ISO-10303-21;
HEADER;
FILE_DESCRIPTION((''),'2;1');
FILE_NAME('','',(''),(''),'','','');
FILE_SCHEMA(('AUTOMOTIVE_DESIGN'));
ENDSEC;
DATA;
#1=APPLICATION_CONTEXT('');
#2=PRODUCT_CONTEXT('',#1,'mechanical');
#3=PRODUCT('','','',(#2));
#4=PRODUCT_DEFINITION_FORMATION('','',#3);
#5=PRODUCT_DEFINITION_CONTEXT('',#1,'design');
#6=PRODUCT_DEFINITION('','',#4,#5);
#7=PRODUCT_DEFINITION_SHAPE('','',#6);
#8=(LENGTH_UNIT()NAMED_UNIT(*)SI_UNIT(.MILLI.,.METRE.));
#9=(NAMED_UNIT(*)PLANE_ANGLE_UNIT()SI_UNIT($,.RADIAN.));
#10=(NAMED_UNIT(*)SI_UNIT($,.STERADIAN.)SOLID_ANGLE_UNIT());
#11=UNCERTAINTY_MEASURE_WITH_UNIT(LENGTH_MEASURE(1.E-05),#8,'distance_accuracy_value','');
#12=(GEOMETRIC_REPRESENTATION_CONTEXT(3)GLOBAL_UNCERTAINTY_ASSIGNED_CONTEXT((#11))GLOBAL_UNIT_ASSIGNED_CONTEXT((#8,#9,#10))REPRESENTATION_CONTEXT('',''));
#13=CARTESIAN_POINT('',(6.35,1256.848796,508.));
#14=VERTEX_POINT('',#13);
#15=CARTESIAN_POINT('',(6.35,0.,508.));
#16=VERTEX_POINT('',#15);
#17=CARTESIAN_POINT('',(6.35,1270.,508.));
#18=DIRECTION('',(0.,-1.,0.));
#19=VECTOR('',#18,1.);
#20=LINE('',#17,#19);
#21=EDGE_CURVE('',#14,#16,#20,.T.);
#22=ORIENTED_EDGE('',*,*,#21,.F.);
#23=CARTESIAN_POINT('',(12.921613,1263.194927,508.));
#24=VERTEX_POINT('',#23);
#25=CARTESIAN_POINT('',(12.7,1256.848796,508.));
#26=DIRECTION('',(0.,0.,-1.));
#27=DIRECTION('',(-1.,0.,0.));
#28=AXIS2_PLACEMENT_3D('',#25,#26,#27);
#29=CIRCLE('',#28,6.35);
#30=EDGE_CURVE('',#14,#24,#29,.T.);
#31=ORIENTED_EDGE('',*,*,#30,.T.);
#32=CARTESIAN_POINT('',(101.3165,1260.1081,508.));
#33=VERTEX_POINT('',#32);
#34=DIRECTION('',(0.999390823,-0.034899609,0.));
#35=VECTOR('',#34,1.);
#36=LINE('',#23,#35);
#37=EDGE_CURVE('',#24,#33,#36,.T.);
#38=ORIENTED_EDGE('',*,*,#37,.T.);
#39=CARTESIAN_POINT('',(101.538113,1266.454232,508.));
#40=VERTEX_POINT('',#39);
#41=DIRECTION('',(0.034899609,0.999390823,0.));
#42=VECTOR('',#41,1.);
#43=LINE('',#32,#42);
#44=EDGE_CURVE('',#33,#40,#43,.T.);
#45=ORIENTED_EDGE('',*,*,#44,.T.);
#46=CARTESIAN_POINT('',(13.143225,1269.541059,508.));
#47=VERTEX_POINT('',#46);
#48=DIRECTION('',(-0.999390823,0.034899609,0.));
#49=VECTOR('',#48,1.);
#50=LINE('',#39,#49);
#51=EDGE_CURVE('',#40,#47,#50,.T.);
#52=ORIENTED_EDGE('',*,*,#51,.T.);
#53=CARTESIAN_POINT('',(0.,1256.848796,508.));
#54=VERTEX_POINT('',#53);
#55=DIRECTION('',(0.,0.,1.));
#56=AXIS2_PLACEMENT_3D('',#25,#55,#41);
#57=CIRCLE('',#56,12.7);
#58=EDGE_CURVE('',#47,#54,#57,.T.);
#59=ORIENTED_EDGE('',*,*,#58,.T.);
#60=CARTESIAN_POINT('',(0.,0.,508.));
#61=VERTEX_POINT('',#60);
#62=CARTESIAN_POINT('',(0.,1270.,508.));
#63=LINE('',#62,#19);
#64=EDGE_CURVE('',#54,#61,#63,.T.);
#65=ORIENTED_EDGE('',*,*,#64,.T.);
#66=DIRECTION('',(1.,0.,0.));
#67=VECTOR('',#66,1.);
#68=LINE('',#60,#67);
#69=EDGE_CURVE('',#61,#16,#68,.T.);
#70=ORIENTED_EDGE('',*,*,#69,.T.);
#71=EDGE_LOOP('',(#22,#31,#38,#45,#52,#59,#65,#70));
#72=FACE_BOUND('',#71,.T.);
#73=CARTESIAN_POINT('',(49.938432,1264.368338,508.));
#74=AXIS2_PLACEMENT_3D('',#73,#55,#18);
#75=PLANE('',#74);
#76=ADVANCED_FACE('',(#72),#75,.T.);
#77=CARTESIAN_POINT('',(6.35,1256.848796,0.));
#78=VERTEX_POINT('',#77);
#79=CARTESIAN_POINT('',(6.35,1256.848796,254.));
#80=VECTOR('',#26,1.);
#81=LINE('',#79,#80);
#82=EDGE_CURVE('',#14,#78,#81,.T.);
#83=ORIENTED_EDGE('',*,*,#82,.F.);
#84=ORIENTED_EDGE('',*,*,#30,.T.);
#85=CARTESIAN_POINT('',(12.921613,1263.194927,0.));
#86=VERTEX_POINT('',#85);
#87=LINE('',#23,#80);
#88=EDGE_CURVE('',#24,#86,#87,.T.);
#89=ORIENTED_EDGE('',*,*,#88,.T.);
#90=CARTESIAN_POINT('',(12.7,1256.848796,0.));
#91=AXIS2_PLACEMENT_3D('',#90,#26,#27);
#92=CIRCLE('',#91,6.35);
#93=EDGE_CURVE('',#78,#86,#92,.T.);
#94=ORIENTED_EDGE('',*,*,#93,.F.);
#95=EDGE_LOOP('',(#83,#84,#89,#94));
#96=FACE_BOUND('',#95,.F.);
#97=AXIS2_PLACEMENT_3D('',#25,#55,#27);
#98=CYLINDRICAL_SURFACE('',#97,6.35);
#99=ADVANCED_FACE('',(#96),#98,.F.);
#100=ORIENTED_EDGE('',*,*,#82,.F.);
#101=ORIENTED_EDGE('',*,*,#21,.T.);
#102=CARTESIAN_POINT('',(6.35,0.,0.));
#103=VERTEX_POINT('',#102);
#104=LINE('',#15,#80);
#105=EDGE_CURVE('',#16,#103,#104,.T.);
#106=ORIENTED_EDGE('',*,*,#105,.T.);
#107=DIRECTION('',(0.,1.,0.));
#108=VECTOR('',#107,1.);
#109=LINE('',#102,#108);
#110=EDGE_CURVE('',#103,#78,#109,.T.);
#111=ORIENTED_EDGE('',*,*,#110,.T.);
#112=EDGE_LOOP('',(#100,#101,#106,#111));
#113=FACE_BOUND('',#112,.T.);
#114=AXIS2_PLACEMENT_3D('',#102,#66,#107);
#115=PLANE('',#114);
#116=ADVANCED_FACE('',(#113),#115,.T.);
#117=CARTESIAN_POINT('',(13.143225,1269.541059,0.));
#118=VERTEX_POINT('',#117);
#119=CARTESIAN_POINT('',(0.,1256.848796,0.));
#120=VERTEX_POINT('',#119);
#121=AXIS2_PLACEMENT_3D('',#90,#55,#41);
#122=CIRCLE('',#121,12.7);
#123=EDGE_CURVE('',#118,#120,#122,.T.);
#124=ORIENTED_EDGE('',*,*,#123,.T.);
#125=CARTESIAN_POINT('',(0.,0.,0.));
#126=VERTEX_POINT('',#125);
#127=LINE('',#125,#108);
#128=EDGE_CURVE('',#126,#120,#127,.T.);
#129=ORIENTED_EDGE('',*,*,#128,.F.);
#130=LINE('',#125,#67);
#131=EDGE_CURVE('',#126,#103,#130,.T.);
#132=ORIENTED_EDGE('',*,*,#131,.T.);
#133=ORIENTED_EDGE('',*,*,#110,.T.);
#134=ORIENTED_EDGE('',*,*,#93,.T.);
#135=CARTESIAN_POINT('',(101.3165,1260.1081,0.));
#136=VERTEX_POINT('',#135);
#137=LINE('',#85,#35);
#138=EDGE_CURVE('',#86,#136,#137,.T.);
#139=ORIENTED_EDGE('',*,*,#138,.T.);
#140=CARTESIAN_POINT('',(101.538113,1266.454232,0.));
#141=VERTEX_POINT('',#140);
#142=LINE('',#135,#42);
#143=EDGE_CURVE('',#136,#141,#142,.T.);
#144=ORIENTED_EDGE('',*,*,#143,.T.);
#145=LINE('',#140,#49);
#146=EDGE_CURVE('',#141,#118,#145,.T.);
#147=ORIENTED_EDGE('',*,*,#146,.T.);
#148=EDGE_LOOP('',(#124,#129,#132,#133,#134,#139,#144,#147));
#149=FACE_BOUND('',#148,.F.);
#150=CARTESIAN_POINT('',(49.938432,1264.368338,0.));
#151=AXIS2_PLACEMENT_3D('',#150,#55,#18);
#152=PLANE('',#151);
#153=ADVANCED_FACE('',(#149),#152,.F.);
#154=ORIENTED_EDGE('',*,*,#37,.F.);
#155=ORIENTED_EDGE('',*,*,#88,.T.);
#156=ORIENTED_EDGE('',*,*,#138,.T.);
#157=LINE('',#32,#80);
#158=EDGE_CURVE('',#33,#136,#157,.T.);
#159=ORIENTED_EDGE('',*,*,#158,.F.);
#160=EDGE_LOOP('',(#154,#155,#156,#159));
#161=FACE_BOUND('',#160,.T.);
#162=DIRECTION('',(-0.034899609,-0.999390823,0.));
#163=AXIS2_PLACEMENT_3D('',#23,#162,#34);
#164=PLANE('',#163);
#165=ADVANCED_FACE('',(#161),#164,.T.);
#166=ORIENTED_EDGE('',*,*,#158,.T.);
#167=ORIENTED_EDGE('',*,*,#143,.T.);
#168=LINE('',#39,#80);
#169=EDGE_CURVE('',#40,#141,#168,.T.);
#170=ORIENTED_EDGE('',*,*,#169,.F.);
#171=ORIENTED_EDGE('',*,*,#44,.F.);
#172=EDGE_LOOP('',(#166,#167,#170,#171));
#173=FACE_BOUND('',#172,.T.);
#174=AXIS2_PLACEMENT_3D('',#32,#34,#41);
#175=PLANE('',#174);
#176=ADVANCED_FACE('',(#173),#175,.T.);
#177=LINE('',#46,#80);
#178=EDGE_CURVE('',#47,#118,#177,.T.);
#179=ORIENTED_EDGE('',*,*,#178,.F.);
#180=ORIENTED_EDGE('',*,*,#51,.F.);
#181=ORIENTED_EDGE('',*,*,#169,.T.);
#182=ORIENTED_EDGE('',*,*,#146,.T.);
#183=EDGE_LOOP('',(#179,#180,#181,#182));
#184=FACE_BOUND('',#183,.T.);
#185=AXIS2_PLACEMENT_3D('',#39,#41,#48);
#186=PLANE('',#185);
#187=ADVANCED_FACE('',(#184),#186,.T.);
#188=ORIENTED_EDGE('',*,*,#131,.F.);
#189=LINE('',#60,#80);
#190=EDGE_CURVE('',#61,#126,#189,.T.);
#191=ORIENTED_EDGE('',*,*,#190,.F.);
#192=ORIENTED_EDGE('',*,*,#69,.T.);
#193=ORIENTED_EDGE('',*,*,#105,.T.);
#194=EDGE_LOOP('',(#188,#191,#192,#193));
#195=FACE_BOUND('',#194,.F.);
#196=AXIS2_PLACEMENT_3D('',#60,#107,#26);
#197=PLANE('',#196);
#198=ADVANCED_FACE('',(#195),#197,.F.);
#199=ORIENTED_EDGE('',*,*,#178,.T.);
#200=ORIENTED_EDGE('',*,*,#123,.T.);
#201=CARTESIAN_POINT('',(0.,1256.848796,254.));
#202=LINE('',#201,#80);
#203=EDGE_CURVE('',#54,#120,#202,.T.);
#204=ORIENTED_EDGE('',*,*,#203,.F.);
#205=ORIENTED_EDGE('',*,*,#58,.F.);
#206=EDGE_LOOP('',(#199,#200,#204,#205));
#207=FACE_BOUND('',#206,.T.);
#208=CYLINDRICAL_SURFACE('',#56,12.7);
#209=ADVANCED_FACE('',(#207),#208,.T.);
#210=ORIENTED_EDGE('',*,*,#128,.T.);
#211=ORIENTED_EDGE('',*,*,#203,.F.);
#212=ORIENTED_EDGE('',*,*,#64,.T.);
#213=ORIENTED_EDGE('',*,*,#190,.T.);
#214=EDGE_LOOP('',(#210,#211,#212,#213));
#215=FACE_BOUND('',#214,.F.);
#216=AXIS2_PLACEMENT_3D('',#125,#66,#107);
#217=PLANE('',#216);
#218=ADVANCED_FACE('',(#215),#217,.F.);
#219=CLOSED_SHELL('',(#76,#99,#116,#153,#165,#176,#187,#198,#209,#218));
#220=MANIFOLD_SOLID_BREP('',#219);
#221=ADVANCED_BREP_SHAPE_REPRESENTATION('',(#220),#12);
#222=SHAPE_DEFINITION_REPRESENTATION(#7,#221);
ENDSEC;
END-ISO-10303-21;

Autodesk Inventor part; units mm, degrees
ref_plane "YZ Plane" through (0, 0, 0) normal (1, 0, 0) x (0, 1, 0)
ref_plane "XZ Plane" through (0, 0, 0) normal (0, 1, 0) x (-1, 0, 0)
ref_plane "XY Plane" through (0, 0, 0) normal (0, 0, 1) x (1, 0, 0)
sketch "Sketch29" plane through (0, 0, 0) normal (1, 0, 0) x (0, 1, 0)
  line L0 (0, 0) -> (1270, 0)
  line L1 (1270, 0) -> (1270, 508)
  line L2 (1270, 508) -> (0, 508)
  line L3 (0, 508) -> (0, 0)
  dimension "d230" = 508
  dimension "d231" = 1270
extrude "Plate26" add sketch "Sketch29" along normal blind 6.35
sketch "Sketch30" plane through (-0.2216, 1263.6539, 508) normal (0.0348995, 0.9993908, 0) x (-0.9993908, 0.0348995, 0)
  line L0 (0, -508) -> (0, 0)
  line L1 (0, 0) -> (-101.6, 0)
  line L2 (-101.6, 0) -> (-101.6, -508)
  line L3 (-101.6, -508) -> (0, -508)
edge flange "Flange23" height 101.6 angle 92 thickness 6.35 bend radius 6.35 thickness toward (0.0348995, 0.9993908, 0) relief tear relief width 6.35 relief depth 3.175 edges at (6.35, 1270, 254) wall of the first edge with corners at (-0.2216, 1263.6539, 0) (-0.2216, 1263.6539, 508) (101.3165, 1260.1081, 508) (101.3165, 1260.1081, 0)
bend "Bend23"
corner "Corner22"
equation "\"d230\" = LARGO"
equation "\"d231\" = ALTO"
equation "\"d237\" = LARGOF"
equation "\"d238\" = ANGULOF"
equation "\"BendRadius\" = Thickness"
equation "\"BendReliefWidth\" = Thickness"
equation "\"BendReliefDepth\" = 0.5 * Thickness"
equation "\"CornerReliefSize\" = 4 * Thickness"
equation "\"MinimumRemnant\" = 2 * Thickness"
equation "\"TransitionRadius\" = BendRadius"
equation "\"JacobiRadiusSize\" = BendRadius"
equation "\"GapSize\" = Thickness"
equation "\"LARGO\" = 508"
equation "\"ALTO\" = 1270"
equation "\"LARGOF\" = 101.6"
equation "\"ANGULOF\" = 92deg"
properties part number "BackWallTop" material "Carbon Steel - A36"
